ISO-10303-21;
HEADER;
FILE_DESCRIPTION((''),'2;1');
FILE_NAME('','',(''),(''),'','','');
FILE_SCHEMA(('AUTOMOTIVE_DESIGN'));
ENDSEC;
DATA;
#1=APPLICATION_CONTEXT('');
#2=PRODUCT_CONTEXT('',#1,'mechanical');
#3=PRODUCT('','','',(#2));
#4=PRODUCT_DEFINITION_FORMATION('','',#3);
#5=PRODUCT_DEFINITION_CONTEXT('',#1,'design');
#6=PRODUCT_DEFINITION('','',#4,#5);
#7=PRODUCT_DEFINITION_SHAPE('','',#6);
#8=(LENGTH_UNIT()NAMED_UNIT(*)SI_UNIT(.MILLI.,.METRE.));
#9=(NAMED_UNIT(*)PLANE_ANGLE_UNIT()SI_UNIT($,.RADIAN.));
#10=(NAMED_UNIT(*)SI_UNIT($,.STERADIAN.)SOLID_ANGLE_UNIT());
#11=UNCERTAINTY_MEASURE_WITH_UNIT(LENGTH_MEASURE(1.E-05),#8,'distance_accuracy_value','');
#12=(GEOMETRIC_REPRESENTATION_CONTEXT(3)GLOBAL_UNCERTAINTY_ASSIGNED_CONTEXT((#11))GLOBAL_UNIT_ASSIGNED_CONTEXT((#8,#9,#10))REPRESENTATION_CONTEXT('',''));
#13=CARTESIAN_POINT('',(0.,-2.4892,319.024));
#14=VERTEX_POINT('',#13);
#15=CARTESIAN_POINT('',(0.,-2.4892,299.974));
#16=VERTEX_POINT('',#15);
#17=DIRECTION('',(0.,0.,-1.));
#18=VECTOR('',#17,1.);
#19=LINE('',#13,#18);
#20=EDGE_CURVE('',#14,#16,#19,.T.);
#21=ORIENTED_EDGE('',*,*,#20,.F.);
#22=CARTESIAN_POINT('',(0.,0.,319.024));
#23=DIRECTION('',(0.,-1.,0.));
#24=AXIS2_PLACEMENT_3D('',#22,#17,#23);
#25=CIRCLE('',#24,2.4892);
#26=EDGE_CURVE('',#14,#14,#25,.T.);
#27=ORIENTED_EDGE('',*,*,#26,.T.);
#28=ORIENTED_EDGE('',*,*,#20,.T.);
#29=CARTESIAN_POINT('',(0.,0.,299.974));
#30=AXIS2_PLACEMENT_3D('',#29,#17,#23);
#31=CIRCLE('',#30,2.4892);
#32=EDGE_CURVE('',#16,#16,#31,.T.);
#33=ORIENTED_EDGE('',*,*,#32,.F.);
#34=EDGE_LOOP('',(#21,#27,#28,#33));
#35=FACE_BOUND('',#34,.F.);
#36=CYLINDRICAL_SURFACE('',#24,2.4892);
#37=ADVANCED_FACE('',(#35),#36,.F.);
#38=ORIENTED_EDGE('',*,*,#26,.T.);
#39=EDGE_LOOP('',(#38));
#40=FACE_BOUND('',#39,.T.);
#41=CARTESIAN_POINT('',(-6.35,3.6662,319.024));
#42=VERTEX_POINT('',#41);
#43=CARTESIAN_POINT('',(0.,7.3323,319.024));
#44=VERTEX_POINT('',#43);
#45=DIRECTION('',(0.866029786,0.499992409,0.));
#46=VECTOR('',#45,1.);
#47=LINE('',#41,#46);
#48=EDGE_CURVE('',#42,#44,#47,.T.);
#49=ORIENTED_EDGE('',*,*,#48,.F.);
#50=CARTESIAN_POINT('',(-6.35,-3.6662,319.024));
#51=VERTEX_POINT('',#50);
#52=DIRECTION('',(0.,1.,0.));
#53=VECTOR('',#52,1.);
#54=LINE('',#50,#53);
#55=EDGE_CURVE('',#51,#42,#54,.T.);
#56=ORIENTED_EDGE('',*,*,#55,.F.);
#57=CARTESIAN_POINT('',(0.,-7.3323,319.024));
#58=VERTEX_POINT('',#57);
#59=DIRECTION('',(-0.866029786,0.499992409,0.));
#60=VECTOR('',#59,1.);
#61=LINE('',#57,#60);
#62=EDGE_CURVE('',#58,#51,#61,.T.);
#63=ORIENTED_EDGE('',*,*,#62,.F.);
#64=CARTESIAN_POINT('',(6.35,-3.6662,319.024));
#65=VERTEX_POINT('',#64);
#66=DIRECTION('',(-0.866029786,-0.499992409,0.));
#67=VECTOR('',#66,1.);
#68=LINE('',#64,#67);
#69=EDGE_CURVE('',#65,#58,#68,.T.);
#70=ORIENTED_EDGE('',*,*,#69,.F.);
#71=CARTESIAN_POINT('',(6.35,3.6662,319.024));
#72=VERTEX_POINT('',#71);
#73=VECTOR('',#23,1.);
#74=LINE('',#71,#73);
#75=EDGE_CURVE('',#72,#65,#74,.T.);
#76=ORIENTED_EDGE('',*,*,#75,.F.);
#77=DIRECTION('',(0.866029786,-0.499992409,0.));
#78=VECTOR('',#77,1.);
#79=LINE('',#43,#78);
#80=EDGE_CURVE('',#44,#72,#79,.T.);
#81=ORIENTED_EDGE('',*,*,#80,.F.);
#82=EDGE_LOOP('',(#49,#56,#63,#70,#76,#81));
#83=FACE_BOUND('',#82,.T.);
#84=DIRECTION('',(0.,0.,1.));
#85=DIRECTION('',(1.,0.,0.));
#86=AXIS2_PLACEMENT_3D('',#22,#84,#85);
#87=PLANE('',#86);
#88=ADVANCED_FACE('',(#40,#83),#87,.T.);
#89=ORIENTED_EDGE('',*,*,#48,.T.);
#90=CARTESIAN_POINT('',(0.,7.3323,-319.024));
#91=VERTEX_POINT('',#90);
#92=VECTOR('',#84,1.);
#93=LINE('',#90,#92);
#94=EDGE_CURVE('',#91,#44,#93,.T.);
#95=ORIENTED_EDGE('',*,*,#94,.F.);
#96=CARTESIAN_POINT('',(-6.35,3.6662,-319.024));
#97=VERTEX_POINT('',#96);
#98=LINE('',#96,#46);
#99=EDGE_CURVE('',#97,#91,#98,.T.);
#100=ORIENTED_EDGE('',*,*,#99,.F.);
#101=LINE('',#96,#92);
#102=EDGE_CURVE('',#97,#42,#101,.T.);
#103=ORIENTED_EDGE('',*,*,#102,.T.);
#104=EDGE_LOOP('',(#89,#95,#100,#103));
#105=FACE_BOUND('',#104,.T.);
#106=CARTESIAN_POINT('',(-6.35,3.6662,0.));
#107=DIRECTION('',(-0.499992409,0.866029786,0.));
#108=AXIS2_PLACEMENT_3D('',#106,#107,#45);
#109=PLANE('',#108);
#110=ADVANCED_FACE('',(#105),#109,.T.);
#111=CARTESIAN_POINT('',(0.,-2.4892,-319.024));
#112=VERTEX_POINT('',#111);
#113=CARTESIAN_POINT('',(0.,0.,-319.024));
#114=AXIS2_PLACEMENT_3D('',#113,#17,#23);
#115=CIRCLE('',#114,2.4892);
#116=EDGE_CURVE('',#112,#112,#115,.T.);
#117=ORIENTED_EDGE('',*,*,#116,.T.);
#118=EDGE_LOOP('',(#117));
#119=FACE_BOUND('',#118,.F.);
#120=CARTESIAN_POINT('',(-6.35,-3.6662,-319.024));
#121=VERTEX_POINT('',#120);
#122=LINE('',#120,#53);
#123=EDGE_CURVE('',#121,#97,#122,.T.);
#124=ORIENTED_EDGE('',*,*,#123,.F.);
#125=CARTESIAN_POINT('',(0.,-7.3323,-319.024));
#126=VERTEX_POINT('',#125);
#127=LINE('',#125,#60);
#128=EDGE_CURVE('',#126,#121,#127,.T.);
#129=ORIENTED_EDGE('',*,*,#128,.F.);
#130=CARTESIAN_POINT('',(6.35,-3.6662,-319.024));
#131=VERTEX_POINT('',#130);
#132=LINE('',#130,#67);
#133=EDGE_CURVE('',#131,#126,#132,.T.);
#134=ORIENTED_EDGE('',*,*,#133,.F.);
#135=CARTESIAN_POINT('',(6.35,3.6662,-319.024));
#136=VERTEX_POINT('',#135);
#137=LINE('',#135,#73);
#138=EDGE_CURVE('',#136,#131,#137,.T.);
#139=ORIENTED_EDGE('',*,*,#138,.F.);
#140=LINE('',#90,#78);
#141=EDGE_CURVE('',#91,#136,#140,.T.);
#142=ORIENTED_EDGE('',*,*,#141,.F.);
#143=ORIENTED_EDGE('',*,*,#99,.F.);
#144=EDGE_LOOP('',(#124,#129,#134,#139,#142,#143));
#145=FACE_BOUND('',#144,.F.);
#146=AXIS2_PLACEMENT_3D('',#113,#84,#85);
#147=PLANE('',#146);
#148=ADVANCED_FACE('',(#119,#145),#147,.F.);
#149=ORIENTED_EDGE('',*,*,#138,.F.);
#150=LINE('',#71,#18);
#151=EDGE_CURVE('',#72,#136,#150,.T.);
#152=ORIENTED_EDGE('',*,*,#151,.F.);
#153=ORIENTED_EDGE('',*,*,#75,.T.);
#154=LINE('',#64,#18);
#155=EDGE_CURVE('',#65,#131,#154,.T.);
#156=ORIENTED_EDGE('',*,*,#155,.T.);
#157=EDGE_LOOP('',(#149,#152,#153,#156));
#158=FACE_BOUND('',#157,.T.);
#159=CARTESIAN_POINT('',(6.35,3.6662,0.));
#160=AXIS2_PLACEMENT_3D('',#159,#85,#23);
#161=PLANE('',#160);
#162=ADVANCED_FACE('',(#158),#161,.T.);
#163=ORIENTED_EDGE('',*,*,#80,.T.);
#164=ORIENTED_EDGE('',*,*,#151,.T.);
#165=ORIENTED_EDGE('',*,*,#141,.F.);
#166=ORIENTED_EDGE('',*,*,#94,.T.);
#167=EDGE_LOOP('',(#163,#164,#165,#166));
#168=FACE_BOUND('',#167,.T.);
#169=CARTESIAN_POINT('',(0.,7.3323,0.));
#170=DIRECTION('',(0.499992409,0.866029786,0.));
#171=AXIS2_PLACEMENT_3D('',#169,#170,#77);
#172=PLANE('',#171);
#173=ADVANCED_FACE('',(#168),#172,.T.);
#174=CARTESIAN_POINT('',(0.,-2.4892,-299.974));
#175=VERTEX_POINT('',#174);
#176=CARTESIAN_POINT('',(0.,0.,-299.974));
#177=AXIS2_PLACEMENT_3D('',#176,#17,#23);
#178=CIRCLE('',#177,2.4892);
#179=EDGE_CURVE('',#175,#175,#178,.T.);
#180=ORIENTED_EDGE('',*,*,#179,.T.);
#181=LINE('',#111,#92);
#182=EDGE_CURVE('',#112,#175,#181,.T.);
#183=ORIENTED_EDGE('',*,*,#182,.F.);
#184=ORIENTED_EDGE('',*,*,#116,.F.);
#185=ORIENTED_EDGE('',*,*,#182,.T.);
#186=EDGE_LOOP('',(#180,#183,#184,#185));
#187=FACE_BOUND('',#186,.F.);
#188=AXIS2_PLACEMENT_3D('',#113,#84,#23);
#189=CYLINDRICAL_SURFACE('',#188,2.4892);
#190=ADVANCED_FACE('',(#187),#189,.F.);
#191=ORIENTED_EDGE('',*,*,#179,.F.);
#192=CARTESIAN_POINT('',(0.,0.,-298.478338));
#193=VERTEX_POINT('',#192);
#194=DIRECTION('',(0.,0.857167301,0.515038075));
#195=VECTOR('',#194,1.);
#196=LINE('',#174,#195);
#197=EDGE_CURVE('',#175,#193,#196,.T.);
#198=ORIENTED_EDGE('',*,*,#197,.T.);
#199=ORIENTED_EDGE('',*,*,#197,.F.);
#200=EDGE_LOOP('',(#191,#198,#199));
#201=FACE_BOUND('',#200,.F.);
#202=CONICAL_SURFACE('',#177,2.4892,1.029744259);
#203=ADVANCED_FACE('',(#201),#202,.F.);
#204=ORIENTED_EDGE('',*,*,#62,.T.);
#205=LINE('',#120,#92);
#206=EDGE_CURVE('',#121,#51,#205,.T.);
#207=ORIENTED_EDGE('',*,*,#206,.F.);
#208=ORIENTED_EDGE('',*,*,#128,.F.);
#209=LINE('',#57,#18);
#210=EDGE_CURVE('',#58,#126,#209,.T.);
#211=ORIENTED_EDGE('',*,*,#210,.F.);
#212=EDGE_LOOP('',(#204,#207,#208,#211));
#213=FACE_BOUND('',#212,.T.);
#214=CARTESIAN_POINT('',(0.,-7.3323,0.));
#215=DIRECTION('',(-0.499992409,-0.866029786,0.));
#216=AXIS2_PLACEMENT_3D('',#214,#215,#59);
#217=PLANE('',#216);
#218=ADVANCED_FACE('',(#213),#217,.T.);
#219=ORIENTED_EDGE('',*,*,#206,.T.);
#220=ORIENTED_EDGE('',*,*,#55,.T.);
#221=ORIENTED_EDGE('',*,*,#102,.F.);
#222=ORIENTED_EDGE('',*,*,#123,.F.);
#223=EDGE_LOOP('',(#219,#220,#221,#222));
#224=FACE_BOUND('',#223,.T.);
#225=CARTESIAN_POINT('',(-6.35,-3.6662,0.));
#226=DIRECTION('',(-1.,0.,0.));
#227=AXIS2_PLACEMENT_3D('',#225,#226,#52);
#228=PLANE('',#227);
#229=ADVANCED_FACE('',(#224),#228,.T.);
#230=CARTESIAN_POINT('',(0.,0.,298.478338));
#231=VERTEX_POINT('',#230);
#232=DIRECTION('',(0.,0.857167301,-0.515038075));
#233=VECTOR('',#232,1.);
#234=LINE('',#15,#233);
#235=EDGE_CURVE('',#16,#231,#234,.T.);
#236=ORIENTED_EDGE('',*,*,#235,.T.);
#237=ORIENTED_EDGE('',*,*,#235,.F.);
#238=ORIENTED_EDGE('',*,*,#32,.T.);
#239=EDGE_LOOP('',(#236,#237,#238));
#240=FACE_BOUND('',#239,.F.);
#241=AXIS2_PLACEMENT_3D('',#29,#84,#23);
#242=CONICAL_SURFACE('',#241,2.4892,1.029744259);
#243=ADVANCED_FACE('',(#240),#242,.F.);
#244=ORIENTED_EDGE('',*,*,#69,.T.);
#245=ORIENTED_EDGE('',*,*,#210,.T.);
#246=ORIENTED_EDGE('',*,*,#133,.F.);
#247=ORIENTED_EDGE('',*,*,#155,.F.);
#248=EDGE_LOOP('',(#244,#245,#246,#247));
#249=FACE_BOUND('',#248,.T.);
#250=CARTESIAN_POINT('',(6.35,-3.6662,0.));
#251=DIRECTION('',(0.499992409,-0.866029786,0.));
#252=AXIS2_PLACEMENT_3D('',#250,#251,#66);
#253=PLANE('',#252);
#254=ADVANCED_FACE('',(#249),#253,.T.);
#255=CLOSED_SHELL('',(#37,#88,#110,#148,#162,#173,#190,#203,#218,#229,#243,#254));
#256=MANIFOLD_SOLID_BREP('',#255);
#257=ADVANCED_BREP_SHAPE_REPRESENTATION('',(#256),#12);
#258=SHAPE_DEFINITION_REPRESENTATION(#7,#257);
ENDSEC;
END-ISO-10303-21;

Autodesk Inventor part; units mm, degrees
ref_plane "YZ Plane" through (0, 0, 0) normal (1, 0, 0) x (0, 1, 0)
ref_plane "XZ Plane" through (0, 0, 0) normal (0, 1, 0) x (-1, 0, 0)
ref_plane "XY Plane" through (0, 0, 0) normal (0, 0, 1) x (1, 0, 0)
sketch "Sketch1" plane through (0, 0, 0) normal (0, 0, 1) x (1, 0, 0)
  line L0 (0, 7.3323) -> (6.35, 3.6662)
  line L1 (6.35, 3.6662) -> (6.35, -3.6662)
  line L2 (6.35, -3.6662) -> (0, -7.3323)
  line L3 (0, -7.3323) -> (-6.35, -3.6662)
  line L4 (-6.35, -3.6662) -> (-6.35, 3.6662)
  line L5 (-6.35, 3.6662) -> (0, 7.3323)
  point P0 (0, 0)
  point P1 (0, 0)
  dimension "d1" = 12.7
extrude "Extrusion1" add sketch "Sketch1" along normal mid plane 638.048
sketch "Sketch2" plane through (0, 0, 319.024) normal (0, 0, 1) x (1, 0, 0)
  point P0 (0, 0)
hole "Hole1" at (0, 0, 319.024) direction (0, 0, -1) diameter 4.9784 depth 19.05 tip angle 118 thread size "1/4-20 UNC" class "2B" standard "ANSI Unified Screw Threads"
mirror "Mirror1" about plane through (0, 0, 0) normal (0, 0, 1) of "Hole1"
properties part number "0.5_Bottom_INTAKE_SHAFT" material "Aluminum, 6061-T6"
